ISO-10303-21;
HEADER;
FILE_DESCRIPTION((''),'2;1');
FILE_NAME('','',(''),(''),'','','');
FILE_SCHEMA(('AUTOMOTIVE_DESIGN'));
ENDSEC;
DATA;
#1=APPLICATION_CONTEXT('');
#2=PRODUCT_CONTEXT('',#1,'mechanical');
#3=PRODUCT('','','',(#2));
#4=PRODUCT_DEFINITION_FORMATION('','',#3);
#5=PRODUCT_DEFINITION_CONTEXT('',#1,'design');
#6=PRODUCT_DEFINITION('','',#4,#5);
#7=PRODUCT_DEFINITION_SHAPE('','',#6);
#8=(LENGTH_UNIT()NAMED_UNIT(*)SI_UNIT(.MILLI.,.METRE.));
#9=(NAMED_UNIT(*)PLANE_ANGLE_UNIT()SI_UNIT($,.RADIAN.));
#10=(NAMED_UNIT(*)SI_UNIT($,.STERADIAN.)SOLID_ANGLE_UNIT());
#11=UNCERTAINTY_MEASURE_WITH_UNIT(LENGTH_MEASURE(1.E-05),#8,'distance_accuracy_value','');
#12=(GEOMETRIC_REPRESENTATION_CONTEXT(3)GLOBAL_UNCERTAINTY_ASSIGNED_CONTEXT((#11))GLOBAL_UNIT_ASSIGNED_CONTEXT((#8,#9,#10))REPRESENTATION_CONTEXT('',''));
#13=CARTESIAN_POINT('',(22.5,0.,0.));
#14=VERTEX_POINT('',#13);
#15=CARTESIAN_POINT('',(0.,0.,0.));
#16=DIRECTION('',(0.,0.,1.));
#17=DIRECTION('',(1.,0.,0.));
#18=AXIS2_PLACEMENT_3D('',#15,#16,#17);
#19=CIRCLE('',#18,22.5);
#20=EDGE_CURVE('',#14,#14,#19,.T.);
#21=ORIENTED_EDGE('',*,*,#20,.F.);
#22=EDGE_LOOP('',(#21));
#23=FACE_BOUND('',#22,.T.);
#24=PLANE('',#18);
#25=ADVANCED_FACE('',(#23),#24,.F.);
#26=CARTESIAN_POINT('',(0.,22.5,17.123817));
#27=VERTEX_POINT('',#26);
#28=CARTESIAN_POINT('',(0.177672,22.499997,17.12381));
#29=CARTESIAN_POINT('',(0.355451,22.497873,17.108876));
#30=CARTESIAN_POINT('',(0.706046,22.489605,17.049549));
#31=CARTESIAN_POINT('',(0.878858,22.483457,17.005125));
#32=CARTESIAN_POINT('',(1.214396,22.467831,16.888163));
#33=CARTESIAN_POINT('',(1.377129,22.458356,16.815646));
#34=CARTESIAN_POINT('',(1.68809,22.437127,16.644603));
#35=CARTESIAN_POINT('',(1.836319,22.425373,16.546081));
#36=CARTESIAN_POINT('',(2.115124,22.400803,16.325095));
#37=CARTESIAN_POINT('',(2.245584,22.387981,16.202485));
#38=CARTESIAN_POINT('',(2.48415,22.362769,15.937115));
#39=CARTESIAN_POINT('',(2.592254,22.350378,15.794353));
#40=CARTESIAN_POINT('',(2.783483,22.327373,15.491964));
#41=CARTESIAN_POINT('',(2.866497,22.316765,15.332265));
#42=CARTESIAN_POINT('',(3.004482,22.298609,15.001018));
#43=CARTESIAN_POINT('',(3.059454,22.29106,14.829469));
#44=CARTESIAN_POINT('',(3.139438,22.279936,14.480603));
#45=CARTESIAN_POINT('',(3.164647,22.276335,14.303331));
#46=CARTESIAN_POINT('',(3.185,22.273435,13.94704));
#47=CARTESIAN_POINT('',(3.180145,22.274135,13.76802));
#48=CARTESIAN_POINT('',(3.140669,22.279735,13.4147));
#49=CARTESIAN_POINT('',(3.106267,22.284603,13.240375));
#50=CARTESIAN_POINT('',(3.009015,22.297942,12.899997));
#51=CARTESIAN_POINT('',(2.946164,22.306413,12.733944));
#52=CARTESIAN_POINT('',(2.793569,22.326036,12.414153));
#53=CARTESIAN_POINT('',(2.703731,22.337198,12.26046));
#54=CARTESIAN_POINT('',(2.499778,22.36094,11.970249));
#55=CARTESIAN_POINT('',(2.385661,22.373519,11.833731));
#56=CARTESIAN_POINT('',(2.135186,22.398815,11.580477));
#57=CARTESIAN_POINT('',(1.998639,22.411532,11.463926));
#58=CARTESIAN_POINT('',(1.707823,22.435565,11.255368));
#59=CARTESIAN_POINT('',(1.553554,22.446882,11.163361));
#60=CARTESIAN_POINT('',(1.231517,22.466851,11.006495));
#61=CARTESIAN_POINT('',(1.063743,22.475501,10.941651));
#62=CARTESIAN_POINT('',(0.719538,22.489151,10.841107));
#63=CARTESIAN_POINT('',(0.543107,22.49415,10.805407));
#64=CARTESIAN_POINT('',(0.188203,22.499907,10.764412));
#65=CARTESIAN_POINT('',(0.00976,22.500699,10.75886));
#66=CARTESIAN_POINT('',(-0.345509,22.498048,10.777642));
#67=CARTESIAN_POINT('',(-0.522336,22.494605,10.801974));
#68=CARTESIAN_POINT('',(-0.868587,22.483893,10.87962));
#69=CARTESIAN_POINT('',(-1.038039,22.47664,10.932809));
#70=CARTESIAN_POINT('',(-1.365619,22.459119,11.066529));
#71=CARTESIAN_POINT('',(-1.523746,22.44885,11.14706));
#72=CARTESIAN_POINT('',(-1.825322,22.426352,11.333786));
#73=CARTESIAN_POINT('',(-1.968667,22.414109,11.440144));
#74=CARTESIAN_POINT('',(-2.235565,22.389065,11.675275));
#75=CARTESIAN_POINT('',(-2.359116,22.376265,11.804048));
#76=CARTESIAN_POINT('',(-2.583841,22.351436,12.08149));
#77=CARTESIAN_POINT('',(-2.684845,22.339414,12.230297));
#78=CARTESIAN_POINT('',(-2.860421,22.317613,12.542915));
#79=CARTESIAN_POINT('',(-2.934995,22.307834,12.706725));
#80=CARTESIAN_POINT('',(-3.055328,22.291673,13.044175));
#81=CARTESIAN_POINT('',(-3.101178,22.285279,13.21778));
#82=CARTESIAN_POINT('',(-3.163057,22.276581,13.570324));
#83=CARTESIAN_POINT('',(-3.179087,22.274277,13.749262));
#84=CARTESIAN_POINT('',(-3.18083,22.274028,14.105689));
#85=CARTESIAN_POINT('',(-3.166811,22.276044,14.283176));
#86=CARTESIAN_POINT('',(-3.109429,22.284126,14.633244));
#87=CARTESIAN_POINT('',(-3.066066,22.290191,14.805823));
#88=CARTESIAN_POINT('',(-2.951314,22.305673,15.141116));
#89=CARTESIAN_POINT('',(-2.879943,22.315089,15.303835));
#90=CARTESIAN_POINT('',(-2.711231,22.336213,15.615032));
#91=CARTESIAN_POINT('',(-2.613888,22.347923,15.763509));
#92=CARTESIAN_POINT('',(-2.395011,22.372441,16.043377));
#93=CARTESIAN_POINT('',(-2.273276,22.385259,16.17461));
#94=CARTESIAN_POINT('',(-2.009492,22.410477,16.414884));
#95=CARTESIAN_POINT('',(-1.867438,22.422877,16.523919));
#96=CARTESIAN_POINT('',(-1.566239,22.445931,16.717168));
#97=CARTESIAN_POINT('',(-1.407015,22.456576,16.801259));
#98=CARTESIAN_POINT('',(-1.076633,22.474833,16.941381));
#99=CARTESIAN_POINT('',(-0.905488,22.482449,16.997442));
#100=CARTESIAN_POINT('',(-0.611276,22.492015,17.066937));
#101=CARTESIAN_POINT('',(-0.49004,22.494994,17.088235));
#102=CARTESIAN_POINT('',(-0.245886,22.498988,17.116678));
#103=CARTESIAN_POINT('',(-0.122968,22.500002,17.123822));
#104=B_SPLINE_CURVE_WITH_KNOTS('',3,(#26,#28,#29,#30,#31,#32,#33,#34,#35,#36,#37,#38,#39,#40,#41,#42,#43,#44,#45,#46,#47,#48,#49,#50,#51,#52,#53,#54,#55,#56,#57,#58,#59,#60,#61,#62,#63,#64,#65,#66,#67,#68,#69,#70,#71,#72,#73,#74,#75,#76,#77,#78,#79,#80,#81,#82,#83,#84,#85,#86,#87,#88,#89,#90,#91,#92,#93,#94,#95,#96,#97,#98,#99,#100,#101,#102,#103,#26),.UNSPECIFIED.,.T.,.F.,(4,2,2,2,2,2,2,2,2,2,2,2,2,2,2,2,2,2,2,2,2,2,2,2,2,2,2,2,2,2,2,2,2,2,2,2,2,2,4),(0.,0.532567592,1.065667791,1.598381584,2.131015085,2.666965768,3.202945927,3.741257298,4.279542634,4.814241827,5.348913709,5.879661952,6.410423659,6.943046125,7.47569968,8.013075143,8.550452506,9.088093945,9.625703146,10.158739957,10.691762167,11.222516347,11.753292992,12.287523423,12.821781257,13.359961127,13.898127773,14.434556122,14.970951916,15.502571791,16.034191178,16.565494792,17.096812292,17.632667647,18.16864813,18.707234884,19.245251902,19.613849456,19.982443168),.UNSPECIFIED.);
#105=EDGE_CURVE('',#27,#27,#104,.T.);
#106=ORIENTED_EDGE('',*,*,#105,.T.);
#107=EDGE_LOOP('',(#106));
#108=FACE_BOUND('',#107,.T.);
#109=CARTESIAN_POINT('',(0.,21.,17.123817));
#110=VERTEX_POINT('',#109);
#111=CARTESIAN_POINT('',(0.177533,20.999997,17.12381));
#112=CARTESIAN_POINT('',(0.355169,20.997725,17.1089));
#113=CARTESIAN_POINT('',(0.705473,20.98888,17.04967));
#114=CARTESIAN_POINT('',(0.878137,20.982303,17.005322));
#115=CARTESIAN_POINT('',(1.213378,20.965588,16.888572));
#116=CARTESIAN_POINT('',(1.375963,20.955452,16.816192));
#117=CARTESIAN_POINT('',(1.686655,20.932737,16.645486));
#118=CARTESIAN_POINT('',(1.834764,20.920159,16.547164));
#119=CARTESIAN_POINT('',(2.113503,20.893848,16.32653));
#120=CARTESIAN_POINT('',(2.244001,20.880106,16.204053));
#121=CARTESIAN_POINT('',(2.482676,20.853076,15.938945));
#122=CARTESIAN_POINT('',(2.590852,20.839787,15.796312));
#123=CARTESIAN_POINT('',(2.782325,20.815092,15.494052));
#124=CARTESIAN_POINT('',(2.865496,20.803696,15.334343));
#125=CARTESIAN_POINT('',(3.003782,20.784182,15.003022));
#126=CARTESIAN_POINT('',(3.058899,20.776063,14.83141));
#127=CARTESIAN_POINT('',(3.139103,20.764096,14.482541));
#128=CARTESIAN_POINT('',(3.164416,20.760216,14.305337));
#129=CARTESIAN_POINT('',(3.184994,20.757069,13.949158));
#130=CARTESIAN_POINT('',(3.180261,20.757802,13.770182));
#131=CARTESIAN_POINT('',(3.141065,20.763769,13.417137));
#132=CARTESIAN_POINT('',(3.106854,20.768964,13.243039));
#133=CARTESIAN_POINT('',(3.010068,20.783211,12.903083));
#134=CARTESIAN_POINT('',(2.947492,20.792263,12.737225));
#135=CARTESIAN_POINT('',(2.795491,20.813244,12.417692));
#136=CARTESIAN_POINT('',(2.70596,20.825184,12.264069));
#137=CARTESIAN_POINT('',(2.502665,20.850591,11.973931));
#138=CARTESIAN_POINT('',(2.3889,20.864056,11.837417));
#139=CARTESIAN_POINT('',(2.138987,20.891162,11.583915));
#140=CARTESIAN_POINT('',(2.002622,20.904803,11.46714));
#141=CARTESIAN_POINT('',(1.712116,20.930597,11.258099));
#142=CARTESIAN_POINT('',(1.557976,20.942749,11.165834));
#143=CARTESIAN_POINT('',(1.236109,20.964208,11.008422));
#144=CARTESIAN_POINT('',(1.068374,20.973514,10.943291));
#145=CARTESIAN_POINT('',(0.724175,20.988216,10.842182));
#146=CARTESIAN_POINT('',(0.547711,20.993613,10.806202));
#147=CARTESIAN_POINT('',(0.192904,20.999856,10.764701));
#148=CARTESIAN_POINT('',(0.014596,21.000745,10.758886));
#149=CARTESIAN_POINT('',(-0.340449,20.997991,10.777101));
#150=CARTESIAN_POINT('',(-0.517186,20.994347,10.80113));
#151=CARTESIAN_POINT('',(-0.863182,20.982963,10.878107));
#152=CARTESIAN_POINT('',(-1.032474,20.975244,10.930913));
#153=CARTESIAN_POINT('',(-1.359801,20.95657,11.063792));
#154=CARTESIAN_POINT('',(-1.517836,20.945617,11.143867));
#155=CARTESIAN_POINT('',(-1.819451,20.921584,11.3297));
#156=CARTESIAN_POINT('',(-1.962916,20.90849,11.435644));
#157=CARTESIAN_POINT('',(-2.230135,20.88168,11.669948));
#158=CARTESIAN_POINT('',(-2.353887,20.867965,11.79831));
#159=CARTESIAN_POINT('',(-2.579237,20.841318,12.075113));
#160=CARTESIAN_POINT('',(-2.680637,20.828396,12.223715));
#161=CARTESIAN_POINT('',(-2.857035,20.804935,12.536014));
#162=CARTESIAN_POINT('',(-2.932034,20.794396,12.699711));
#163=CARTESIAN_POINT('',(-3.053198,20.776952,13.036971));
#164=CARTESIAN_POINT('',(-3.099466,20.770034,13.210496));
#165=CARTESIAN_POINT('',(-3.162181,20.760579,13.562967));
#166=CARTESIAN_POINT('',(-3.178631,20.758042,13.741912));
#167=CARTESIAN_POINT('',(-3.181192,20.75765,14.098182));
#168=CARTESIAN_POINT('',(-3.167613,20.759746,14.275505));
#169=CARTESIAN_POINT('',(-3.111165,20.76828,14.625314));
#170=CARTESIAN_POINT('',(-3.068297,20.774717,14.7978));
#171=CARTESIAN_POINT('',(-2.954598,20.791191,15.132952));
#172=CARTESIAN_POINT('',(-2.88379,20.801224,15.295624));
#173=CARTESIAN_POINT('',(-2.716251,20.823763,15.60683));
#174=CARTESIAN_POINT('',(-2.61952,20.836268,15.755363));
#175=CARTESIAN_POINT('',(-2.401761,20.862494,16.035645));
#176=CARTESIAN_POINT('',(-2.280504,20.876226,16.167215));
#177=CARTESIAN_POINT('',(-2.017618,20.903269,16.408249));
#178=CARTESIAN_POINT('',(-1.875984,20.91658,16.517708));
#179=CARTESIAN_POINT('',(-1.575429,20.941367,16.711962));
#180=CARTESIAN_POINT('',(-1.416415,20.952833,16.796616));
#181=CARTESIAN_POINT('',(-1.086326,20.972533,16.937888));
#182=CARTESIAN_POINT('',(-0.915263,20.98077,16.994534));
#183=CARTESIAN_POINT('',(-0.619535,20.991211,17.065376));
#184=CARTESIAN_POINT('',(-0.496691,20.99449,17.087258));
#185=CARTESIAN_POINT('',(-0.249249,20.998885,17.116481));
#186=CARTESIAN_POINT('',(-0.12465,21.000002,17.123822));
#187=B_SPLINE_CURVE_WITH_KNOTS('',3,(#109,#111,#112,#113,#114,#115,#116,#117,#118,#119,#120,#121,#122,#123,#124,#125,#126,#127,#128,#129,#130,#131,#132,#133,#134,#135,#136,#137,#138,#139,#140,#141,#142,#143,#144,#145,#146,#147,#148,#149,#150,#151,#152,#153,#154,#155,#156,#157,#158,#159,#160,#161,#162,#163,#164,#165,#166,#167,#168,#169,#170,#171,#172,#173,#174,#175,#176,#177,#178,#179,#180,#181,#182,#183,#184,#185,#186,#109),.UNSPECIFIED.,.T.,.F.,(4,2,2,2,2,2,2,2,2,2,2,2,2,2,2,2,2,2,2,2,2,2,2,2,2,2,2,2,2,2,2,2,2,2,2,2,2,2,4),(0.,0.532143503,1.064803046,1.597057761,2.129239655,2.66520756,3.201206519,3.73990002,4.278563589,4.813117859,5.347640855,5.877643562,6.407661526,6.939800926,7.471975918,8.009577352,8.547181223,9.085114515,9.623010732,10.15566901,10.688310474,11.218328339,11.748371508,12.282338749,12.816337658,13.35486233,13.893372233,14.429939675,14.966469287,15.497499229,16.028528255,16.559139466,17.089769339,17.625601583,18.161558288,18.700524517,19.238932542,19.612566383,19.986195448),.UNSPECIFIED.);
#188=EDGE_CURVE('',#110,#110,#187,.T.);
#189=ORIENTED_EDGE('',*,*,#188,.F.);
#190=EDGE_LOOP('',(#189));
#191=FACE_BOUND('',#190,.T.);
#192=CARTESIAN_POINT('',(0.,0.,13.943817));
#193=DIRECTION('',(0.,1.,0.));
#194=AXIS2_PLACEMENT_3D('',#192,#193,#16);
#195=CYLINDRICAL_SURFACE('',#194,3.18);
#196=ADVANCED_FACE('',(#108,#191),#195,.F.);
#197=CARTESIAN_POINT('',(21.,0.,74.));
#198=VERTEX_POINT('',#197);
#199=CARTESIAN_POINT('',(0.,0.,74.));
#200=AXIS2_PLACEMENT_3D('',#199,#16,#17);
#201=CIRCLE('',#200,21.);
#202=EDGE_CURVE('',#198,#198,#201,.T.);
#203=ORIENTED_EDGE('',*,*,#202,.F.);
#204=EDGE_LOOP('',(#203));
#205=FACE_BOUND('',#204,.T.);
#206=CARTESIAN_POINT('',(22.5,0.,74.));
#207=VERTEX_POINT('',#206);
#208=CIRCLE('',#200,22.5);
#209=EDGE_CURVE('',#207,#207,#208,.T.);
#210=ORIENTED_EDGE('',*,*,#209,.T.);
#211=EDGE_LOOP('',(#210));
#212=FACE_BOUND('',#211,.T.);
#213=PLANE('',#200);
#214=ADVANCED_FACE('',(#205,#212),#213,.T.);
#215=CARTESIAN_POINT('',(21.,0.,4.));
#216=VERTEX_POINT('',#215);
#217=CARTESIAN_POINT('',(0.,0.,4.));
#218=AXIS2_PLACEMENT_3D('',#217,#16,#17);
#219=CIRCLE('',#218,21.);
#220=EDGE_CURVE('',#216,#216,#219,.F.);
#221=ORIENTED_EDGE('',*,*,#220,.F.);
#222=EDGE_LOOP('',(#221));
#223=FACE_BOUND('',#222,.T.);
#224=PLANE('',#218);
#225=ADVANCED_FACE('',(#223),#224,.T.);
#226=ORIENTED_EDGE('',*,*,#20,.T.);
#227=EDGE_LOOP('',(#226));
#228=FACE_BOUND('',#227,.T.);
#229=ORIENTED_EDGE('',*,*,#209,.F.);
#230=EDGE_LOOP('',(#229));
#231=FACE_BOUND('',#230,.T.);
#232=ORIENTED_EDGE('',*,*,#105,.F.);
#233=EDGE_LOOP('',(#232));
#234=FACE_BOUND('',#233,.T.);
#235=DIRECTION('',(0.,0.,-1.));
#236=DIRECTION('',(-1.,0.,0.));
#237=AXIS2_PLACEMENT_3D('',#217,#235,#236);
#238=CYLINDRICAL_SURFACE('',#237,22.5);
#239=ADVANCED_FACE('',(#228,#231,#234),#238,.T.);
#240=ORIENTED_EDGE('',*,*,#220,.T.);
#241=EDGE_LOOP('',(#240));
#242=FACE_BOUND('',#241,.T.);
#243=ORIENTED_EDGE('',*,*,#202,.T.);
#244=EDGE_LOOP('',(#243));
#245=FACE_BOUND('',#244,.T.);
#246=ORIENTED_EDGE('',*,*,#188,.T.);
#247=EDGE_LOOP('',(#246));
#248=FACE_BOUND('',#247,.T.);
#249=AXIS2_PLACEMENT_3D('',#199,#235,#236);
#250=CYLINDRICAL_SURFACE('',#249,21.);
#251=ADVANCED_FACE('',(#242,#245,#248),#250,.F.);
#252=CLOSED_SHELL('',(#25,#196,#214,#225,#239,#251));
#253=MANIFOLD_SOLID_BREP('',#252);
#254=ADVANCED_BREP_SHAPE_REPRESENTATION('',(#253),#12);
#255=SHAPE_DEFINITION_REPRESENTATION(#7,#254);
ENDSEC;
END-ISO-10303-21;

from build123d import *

# Parameters (mm, degrees)
ESQUISSE1_R                 = 22.5
BOSS_EXTRU_1_DEPTH          = 4
ESQUISSE2_R                 = 22.5
ESQUISSE2_R_2               = 21
BOSS_EXTRU_2_DEPTH          = 70
ENL_V_START                 = 20.75783225
ENL_V_MAT_EXTRU_1_OUTLINE_R = 3.18
ENL_V_MAT_EXTRU_1_DEPTH     = 1.742167853


# Read off the part's stored shape, not the designer's step: Enlèv. mat.-Extru.1
with BuildPart() as part:
    # Esquisse1 → Boss.-Extru.1 (new body)
    with BuildSketch(Plane.XY):
        Circle(ESQUISSE1_R)
    extrude(amount=BOSS_EXTRU_1_DEPTH)

    # Esquisse2 → Boss.-Extru.2 (add)
    with BuildSketch(Plane.XY.offset(4)):
        Circle(ESQUISSE2_R)
        Circle(ESQUISSE2_R_2, mode=Mode.SUBTRACT)
    extrude(amount=BOSS_EXTRU_2_DEPTH)

    # Enlèv. mat.-Extru.1 outline → Enlèv. mat.-Extru.1 (cut)
    with BuildSketch(Plane(origin=(0, 0, 0), x_dir=(1, 0, 0), z_dir=(0, 1, 0)).offset(ENL_V_START)):
        with Locations((0, -13.943817021)):
            Circle(ENL_V_MAT_EXTRU_1_OUTLINE_R)
    extrude(amount=ENL_V_MAT_EXTRU_1_DEPTH, mode=Mode.SUBTRACT)


solid = part.part
